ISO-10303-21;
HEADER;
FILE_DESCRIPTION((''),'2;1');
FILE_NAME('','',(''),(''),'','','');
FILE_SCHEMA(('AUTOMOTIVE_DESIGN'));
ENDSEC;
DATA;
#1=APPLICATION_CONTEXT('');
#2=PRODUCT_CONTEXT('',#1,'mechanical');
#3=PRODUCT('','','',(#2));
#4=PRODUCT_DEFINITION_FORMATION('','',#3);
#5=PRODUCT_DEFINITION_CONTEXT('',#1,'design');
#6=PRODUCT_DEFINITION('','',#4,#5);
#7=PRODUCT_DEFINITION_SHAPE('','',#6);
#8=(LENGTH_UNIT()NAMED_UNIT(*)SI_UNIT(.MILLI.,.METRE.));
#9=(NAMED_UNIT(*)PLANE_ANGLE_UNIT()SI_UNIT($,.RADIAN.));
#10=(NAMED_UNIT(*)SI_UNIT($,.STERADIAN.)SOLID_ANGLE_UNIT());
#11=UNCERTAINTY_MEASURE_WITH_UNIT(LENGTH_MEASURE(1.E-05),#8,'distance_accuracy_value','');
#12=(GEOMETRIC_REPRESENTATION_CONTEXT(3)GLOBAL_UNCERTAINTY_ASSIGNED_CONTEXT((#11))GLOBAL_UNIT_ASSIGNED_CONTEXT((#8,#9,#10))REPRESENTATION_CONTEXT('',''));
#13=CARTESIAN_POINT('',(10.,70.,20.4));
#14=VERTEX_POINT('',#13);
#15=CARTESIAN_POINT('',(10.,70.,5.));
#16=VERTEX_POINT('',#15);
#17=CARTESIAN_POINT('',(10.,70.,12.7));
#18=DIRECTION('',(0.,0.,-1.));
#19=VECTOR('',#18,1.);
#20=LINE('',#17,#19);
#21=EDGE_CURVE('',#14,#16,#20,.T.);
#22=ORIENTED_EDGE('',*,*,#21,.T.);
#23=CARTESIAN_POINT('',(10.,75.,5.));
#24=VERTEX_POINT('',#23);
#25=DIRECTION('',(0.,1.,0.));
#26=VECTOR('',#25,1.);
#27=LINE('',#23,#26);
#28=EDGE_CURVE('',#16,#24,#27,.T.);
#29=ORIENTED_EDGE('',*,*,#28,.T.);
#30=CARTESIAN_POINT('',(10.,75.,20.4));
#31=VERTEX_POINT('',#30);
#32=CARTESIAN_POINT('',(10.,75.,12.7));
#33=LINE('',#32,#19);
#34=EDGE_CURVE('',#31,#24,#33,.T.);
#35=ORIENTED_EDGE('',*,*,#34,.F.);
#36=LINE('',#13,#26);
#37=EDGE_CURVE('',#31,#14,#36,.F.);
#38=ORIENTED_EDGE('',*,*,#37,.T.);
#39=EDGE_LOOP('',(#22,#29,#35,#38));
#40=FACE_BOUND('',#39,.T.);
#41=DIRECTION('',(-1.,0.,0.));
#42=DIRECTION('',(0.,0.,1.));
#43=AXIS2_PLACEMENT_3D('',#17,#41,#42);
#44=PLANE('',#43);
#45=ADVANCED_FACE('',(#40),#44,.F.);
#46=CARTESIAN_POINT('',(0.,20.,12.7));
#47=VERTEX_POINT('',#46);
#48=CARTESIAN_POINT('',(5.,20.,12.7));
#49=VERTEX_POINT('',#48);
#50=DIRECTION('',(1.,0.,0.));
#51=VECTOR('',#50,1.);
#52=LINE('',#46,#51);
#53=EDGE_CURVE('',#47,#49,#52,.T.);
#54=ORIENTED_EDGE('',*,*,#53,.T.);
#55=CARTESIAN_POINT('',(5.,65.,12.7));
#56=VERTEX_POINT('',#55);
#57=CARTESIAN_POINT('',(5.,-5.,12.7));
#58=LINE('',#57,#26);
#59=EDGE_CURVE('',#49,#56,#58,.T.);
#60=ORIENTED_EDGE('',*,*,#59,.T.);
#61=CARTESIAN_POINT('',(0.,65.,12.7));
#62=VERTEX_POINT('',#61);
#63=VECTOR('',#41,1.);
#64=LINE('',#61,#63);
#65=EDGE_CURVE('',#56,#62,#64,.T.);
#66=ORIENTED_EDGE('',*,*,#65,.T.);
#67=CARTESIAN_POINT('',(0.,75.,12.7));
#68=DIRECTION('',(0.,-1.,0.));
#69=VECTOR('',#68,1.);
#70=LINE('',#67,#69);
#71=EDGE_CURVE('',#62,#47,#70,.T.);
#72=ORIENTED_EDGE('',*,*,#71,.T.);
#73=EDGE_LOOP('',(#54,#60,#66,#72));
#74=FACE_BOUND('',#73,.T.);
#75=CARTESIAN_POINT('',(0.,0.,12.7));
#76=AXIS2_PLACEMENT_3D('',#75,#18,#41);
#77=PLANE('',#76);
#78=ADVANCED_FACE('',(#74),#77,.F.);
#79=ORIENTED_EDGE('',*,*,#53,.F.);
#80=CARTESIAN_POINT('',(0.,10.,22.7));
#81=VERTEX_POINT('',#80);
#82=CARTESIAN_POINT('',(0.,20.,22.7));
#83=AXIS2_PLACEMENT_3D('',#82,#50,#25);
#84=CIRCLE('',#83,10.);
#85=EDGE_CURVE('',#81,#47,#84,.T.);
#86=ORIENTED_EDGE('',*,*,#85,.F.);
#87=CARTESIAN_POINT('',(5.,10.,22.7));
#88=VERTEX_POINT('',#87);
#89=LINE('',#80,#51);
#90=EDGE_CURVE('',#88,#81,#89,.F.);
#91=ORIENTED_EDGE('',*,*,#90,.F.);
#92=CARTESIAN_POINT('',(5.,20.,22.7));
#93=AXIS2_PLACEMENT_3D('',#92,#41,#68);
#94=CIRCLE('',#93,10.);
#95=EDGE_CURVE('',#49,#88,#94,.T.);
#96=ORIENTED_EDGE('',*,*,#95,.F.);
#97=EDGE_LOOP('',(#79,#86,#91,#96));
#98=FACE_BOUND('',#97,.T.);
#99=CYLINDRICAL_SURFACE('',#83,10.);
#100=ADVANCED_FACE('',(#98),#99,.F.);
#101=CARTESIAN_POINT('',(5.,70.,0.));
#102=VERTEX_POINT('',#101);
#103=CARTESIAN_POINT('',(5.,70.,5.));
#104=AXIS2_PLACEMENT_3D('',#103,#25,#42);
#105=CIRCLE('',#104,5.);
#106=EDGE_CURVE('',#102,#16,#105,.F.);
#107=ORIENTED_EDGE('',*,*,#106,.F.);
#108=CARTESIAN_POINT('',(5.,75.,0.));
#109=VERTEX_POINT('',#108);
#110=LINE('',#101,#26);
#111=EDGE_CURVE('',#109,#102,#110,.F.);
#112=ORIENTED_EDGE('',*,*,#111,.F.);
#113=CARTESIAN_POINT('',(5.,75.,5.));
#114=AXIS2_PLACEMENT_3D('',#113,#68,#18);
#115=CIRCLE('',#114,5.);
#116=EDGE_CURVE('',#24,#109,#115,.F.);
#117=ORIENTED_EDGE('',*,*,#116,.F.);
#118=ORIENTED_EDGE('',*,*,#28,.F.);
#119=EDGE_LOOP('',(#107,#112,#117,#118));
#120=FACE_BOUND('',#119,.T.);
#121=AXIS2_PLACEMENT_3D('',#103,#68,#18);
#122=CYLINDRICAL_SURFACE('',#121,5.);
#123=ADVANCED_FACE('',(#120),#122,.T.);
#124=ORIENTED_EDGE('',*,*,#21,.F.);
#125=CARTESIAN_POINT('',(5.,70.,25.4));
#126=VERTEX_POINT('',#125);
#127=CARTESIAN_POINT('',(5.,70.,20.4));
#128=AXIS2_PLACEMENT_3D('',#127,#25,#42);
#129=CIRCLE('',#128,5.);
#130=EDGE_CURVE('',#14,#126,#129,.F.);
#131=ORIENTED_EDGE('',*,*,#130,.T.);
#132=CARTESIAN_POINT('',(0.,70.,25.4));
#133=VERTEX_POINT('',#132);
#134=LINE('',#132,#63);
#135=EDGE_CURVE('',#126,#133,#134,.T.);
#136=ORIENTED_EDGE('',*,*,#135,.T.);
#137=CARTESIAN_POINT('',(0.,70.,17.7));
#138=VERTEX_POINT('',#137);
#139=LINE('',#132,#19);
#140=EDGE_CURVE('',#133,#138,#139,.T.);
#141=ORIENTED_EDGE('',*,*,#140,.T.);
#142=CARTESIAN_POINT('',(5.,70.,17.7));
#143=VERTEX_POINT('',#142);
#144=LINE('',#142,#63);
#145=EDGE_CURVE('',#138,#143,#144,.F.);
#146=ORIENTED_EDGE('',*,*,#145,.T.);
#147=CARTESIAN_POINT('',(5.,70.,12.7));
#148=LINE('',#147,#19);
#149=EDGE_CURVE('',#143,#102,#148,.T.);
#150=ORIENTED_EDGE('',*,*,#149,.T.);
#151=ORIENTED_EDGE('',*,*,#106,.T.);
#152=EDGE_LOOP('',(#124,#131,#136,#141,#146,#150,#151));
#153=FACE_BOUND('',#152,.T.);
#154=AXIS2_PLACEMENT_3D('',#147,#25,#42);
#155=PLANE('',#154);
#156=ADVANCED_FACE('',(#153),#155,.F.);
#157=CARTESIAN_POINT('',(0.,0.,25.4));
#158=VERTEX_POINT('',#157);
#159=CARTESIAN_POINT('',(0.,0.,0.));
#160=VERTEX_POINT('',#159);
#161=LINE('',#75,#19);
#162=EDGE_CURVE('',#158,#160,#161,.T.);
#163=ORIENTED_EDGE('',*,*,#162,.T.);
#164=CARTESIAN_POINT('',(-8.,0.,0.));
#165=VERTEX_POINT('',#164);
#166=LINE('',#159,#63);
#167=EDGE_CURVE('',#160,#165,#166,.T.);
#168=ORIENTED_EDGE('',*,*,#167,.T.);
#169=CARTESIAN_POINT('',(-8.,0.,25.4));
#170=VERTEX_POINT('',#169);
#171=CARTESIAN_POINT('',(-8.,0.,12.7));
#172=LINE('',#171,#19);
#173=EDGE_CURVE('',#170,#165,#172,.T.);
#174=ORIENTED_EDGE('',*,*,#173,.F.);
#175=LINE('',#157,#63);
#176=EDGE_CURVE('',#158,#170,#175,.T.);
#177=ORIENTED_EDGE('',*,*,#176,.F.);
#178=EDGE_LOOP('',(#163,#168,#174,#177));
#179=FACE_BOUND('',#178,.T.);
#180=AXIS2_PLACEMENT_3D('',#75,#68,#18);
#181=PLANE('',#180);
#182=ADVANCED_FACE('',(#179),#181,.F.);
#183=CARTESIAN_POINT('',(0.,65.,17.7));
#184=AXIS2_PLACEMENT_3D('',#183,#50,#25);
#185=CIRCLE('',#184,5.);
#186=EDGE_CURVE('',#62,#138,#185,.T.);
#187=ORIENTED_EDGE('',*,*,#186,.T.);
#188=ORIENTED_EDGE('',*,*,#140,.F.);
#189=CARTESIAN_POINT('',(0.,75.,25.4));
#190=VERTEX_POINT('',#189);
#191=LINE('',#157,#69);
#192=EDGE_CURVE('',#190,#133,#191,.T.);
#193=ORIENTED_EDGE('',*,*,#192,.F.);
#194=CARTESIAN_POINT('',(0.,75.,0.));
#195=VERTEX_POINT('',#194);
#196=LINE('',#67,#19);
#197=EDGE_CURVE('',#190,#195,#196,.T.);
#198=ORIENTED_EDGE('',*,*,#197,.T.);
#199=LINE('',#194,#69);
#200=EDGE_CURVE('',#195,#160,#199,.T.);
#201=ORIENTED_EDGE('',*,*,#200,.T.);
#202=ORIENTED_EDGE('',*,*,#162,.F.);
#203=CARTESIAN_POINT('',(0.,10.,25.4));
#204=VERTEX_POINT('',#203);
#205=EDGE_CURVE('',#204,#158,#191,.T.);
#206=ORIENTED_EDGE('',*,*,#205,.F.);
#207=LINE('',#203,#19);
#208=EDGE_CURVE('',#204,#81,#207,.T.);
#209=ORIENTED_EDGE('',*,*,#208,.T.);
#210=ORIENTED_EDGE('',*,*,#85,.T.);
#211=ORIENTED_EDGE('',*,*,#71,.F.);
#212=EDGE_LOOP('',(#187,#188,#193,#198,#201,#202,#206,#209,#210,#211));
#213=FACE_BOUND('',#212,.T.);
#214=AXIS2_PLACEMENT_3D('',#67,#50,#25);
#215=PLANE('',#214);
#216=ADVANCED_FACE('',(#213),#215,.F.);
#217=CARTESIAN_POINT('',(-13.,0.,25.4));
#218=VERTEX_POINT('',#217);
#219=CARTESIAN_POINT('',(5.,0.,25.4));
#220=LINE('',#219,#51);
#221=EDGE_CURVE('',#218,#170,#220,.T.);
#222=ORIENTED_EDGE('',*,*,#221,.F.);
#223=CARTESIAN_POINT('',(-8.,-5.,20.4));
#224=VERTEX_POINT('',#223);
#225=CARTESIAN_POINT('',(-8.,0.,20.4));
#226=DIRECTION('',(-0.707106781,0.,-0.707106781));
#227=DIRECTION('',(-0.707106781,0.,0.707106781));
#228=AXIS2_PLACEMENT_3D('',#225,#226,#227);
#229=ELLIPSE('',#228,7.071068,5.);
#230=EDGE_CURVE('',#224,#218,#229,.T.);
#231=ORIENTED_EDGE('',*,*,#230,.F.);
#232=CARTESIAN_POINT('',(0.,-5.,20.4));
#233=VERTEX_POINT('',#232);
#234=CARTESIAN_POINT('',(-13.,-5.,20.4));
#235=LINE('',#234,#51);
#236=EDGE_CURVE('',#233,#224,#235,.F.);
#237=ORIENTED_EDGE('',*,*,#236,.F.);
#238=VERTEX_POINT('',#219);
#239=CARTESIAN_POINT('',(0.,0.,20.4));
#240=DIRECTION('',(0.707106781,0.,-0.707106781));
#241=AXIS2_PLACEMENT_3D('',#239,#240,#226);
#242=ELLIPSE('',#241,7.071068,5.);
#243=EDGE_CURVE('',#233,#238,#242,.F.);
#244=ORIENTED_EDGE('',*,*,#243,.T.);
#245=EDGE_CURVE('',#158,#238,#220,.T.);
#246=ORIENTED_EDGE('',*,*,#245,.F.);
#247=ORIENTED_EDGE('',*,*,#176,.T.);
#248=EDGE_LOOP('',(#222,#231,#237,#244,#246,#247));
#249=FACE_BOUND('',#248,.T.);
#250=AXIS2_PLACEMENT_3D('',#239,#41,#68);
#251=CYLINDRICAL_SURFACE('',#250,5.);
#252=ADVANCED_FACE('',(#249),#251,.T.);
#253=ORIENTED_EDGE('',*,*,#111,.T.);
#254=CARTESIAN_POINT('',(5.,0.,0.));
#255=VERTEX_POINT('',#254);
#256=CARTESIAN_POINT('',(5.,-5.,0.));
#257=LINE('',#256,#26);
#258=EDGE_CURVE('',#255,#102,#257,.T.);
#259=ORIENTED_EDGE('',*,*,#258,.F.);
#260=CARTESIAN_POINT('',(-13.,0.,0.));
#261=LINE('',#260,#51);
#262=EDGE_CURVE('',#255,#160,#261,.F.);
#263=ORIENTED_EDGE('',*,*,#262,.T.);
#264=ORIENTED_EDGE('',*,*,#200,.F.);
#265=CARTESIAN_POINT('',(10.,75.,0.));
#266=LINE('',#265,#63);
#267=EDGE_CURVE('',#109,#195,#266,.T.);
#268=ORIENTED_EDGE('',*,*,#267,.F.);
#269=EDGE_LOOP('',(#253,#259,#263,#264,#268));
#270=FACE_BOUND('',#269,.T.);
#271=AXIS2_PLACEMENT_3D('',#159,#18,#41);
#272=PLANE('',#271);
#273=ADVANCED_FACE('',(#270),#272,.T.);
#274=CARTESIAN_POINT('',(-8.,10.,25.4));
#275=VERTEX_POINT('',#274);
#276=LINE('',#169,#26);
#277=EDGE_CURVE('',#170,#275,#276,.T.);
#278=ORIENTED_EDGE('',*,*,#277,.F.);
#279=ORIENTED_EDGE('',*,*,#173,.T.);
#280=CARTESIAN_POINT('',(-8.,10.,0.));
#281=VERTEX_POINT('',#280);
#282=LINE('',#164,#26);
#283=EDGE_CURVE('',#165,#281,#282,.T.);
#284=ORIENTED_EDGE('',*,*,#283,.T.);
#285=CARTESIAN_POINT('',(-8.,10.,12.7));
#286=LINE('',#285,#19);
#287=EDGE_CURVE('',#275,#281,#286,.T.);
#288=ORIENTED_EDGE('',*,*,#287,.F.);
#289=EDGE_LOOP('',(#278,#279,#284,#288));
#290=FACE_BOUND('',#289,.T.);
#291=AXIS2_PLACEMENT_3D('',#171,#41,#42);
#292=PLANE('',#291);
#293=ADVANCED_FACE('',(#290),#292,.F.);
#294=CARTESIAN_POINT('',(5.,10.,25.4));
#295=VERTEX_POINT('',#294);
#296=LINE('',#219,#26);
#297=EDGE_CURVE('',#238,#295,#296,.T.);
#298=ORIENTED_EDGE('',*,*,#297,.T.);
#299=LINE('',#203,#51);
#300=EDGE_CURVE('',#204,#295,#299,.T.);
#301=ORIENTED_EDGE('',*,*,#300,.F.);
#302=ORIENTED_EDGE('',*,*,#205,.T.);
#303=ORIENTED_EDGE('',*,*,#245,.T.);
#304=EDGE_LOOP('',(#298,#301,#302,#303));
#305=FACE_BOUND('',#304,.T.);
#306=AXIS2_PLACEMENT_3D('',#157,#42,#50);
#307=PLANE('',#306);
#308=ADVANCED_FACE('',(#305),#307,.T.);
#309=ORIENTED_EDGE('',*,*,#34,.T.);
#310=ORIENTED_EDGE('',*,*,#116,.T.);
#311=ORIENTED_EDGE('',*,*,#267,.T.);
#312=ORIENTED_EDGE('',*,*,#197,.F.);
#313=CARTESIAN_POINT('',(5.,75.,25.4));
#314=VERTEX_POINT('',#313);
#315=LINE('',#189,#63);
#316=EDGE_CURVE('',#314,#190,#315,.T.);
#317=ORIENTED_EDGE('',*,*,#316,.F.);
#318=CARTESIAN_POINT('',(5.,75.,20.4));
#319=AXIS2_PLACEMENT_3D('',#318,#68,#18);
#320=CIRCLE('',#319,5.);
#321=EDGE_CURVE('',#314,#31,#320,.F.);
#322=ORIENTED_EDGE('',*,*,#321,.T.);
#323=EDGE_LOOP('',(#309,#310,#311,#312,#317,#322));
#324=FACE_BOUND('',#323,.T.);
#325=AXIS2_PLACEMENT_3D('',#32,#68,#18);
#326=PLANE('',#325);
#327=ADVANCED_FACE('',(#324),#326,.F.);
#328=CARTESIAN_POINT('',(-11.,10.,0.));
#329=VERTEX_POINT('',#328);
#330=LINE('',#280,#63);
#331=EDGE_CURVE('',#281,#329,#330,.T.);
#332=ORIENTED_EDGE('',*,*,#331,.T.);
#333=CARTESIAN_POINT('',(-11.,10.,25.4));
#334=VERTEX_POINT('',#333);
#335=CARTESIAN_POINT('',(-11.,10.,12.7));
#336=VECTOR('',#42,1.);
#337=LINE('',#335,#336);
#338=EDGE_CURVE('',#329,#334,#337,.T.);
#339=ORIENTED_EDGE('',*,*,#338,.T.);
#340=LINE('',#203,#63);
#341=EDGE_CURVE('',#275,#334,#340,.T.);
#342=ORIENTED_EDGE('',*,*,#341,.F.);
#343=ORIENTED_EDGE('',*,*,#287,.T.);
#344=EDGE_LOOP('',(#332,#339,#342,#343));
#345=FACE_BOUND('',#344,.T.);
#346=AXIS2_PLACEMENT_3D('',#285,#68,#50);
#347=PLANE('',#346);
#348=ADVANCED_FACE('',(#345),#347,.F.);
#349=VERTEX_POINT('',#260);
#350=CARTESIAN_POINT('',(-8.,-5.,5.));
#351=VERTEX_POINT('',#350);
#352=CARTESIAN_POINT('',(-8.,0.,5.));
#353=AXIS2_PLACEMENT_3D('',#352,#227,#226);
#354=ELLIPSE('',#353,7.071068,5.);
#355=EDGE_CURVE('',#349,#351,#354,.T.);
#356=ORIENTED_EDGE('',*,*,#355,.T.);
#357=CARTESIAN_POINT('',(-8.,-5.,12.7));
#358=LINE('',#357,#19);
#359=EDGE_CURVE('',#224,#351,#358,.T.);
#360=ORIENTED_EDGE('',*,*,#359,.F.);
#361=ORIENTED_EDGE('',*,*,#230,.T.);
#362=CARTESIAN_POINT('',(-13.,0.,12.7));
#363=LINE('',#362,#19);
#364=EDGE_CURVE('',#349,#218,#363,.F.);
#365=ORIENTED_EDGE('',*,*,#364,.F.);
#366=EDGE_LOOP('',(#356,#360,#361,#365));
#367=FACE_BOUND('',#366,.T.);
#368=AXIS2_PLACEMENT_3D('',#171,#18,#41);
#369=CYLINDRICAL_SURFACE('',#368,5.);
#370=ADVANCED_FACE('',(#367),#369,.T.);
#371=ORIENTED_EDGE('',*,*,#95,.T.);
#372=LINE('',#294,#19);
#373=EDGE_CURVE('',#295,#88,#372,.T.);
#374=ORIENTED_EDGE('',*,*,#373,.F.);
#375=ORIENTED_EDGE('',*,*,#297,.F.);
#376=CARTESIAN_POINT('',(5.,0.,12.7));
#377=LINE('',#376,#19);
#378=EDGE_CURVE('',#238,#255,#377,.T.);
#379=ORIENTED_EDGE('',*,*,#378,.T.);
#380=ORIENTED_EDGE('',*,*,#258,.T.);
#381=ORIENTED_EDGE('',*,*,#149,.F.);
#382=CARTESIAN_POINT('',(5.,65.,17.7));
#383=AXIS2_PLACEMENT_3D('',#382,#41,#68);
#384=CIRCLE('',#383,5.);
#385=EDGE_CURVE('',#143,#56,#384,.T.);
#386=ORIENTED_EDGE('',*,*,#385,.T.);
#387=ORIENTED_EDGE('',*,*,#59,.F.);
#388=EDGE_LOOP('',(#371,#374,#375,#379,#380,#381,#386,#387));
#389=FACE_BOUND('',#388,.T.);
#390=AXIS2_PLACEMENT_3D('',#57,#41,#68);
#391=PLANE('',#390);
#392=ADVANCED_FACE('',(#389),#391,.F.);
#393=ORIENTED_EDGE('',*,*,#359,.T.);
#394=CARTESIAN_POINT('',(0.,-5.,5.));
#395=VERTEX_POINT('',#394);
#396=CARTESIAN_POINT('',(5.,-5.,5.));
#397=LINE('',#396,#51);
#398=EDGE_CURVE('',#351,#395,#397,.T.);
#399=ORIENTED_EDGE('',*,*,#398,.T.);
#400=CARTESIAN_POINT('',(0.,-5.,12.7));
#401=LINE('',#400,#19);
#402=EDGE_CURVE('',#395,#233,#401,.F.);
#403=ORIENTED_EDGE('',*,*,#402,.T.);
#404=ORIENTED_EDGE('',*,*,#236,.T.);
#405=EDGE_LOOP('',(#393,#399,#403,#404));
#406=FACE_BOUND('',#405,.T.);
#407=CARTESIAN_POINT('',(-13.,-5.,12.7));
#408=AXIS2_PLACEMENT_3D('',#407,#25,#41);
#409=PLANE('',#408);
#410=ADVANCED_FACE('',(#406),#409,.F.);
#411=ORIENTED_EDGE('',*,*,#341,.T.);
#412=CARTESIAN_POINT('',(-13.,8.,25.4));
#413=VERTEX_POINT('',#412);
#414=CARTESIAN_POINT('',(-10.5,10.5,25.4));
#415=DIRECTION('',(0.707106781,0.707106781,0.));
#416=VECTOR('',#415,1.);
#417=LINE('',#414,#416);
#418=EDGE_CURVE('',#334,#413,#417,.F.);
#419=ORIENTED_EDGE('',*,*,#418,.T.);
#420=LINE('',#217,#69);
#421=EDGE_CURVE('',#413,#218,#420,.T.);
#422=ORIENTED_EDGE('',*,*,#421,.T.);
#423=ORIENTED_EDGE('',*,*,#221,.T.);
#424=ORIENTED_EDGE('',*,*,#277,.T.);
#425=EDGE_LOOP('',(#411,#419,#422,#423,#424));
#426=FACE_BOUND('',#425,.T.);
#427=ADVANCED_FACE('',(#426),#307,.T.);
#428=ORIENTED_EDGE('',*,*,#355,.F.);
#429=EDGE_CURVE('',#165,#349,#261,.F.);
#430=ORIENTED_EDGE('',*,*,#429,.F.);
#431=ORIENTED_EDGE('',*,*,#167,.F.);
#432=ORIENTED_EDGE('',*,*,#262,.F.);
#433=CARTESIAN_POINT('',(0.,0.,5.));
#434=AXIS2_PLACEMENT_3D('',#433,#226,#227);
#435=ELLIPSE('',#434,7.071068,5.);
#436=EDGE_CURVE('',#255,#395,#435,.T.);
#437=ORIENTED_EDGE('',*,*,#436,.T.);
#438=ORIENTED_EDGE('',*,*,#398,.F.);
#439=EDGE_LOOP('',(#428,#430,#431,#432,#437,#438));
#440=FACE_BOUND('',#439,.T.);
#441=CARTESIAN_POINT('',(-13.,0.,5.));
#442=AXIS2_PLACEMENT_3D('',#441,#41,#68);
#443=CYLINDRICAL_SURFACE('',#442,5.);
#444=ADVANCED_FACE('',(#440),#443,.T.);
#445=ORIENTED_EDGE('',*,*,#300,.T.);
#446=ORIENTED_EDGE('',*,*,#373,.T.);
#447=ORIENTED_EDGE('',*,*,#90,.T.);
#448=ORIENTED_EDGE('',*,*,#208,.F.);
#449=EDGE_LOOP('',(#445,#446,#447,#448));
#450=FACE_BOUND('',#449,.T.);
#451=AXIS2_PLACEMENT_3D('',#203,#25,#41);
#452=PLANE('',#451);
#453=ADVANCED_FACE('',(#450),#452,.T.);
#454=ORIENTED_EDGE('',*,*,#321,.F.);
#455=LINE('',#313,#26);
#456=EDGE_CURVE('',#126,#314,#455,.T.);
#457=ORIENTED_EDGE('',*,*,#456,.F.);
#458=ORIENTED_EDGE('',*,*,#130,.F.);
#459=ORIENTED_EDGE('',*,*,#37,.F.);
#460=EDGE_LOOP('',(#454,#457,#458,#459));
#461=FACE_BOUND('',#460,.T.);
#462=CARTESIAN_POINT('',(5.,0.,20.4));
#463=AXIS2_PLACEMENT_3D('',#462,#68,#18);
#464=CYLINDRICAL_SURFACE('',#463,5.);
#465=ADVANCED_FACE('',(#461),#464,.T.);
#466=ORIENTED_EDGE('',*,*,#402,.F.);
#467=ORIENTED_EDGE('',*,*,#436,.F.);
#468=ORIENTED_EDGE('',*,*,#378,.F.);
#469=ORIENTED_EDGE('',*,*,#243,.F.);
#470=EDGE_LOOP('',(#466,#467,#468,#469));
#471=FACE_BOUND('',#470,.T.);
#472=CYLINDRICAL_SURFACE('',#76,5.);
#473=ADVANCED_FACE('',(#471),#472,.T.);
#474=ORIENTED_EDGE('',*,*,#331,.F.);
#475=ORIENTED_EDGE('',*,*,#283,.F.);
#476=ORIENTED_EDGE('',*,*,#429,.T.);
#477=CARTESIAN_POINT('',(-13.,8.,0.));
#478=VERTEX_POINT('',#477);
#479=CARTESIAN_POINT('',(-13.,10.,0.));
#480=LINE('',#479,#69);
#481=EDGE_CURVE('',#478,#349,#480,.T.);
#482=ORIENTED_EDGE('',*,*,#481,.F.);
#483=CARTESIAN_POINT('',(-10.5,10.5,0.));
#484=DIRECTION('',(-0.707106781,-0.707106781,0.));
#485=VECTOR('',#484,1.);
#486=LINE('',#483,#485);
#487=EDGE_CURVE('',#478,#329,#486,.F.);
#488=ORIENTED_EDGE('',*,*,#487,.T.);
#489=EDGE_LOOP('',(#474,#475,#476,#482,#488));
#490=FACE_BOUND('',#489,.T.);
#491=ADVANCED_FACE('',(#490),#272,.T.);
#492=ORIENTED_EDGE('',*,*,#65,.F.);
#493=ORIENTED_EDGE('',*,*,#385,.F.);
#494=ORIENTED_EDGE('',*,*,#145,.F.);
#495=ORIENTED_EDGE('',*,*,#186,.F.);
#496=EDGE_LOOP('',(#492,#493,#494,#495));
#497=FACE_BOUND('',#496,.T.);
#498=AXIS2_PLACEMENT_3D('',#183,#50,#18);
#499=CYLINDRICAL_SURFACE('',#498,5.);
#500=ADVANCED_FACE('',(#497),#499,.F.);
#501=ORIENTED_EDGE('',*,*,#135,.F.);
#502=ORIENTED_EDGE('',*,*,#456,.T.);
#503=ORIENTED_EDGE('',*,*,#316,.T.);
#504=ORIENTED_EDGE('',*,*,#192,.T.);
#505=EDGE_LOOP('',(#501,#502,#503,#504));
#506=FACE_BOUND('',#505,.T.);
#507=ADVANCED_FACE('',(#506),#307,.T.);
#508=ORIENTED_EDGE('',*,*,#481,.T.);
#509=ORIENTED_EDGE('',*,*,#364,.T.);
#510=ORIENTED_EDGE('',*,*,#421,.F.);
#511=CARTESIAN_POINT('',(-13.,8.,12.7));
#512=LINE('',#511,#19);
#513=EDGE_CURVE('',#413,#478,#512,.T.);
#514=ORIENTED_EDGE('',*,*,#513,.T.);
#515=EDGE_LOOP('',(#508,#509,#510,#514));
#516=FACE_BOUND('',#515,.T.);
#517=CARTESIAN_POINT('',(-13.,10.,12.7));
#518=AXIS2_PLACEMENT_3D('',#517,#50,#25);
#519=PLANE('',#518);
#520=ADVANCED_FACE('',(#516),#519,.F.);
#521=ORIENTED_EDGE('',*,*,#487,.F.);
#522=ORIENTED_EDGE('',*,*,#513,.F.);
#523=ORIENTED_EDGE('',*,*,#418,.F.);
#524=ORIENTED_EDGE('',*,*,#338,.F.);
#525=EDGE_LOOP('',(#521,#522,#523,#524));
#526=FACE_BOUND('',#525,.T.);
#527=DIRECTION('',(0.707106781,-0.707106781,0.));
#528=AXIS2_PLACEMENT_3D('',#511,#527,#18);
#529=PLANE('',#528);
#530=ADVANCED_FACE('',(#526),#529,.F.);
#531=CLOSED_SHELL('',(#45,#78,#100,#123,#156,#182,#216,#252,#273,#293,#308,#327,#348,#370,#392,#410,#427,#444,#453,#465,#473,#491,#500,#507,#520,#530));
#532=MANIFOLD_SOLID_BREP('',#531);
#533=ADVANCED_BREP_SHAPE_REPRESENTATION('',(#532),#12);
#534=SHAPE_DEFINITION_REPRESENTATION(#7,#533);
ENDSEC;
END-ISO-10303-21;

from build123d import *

# Parameters (mm, degrees)
BOSS_EXTRUDE1_DEPTH = 12.7
BOSS_EXTRUDE2_DEPTH = 12.7
FILLET1_R           = 10
FILLET2_R           = 5
CHAMFER2_SIZE       = 2


with BuildPart() as part:
    # Sketch1 → Boss-Extrude1 (new body)
    with BuildSketch(Plane.XY):
        Polygon((0, 0), (-8, 0), (-8, 10), (-13, 10), (-13, -5), (5, -5), (5, 70), (10, 70), (10, 75), (0, 75), align=None)
    extrude(amount=BOSS_EXTRUDE1_DEPTH)

    # Sketch2 → Boss-Extrude2 (add)
    with BuildSketch(Plane.XY.offset(12.7)):
        Polygon((5, 10), (0, 10), (0, 0), (-8, 0), (-8, 10), (-13, 10), (-13, -5), (5, -5), align=None)
        Polygon((0, 75), (0, 70), (5, 70), (10, 70), (10, 75), align=None)
    extrude(amount=BOSS_EXTRUDE2_DEPTH)

    # Fillet1
    fillet1_edges = [part.edges().sort_by_distance(p)[0] for p in [
        (2.5, 10, 12.7),
    ]]
    fillet(fillet1_edges, radius=FILLET1_R)

    # Fillet2
    fillet2_edges = [part.edges().sort_by_distance(p)[0] for p in [
        (-13, -5, 12.7),
        (-4, -5, 25.4),
        (5, -5, 12.7),
        (-4, -5, 0),
        (10, 72.5, 0),
        (10, 72.5, 25.4),
        (2.5, 70, 12.7),
    ]]
    fillet(fillet2_edges, radius=FILLET2_R - 0.0001)  # a hair under: the kernel refuses the full size

    # Chamfer2
    chamfer2_edges = [part.edges().sort_by_distance(p)[0] for p in [
        (-13, 10, 12.7),
    ]]
    chamfer(chamfer2_edges, length=CHAMFER2_SIZE)


solid = part.part
